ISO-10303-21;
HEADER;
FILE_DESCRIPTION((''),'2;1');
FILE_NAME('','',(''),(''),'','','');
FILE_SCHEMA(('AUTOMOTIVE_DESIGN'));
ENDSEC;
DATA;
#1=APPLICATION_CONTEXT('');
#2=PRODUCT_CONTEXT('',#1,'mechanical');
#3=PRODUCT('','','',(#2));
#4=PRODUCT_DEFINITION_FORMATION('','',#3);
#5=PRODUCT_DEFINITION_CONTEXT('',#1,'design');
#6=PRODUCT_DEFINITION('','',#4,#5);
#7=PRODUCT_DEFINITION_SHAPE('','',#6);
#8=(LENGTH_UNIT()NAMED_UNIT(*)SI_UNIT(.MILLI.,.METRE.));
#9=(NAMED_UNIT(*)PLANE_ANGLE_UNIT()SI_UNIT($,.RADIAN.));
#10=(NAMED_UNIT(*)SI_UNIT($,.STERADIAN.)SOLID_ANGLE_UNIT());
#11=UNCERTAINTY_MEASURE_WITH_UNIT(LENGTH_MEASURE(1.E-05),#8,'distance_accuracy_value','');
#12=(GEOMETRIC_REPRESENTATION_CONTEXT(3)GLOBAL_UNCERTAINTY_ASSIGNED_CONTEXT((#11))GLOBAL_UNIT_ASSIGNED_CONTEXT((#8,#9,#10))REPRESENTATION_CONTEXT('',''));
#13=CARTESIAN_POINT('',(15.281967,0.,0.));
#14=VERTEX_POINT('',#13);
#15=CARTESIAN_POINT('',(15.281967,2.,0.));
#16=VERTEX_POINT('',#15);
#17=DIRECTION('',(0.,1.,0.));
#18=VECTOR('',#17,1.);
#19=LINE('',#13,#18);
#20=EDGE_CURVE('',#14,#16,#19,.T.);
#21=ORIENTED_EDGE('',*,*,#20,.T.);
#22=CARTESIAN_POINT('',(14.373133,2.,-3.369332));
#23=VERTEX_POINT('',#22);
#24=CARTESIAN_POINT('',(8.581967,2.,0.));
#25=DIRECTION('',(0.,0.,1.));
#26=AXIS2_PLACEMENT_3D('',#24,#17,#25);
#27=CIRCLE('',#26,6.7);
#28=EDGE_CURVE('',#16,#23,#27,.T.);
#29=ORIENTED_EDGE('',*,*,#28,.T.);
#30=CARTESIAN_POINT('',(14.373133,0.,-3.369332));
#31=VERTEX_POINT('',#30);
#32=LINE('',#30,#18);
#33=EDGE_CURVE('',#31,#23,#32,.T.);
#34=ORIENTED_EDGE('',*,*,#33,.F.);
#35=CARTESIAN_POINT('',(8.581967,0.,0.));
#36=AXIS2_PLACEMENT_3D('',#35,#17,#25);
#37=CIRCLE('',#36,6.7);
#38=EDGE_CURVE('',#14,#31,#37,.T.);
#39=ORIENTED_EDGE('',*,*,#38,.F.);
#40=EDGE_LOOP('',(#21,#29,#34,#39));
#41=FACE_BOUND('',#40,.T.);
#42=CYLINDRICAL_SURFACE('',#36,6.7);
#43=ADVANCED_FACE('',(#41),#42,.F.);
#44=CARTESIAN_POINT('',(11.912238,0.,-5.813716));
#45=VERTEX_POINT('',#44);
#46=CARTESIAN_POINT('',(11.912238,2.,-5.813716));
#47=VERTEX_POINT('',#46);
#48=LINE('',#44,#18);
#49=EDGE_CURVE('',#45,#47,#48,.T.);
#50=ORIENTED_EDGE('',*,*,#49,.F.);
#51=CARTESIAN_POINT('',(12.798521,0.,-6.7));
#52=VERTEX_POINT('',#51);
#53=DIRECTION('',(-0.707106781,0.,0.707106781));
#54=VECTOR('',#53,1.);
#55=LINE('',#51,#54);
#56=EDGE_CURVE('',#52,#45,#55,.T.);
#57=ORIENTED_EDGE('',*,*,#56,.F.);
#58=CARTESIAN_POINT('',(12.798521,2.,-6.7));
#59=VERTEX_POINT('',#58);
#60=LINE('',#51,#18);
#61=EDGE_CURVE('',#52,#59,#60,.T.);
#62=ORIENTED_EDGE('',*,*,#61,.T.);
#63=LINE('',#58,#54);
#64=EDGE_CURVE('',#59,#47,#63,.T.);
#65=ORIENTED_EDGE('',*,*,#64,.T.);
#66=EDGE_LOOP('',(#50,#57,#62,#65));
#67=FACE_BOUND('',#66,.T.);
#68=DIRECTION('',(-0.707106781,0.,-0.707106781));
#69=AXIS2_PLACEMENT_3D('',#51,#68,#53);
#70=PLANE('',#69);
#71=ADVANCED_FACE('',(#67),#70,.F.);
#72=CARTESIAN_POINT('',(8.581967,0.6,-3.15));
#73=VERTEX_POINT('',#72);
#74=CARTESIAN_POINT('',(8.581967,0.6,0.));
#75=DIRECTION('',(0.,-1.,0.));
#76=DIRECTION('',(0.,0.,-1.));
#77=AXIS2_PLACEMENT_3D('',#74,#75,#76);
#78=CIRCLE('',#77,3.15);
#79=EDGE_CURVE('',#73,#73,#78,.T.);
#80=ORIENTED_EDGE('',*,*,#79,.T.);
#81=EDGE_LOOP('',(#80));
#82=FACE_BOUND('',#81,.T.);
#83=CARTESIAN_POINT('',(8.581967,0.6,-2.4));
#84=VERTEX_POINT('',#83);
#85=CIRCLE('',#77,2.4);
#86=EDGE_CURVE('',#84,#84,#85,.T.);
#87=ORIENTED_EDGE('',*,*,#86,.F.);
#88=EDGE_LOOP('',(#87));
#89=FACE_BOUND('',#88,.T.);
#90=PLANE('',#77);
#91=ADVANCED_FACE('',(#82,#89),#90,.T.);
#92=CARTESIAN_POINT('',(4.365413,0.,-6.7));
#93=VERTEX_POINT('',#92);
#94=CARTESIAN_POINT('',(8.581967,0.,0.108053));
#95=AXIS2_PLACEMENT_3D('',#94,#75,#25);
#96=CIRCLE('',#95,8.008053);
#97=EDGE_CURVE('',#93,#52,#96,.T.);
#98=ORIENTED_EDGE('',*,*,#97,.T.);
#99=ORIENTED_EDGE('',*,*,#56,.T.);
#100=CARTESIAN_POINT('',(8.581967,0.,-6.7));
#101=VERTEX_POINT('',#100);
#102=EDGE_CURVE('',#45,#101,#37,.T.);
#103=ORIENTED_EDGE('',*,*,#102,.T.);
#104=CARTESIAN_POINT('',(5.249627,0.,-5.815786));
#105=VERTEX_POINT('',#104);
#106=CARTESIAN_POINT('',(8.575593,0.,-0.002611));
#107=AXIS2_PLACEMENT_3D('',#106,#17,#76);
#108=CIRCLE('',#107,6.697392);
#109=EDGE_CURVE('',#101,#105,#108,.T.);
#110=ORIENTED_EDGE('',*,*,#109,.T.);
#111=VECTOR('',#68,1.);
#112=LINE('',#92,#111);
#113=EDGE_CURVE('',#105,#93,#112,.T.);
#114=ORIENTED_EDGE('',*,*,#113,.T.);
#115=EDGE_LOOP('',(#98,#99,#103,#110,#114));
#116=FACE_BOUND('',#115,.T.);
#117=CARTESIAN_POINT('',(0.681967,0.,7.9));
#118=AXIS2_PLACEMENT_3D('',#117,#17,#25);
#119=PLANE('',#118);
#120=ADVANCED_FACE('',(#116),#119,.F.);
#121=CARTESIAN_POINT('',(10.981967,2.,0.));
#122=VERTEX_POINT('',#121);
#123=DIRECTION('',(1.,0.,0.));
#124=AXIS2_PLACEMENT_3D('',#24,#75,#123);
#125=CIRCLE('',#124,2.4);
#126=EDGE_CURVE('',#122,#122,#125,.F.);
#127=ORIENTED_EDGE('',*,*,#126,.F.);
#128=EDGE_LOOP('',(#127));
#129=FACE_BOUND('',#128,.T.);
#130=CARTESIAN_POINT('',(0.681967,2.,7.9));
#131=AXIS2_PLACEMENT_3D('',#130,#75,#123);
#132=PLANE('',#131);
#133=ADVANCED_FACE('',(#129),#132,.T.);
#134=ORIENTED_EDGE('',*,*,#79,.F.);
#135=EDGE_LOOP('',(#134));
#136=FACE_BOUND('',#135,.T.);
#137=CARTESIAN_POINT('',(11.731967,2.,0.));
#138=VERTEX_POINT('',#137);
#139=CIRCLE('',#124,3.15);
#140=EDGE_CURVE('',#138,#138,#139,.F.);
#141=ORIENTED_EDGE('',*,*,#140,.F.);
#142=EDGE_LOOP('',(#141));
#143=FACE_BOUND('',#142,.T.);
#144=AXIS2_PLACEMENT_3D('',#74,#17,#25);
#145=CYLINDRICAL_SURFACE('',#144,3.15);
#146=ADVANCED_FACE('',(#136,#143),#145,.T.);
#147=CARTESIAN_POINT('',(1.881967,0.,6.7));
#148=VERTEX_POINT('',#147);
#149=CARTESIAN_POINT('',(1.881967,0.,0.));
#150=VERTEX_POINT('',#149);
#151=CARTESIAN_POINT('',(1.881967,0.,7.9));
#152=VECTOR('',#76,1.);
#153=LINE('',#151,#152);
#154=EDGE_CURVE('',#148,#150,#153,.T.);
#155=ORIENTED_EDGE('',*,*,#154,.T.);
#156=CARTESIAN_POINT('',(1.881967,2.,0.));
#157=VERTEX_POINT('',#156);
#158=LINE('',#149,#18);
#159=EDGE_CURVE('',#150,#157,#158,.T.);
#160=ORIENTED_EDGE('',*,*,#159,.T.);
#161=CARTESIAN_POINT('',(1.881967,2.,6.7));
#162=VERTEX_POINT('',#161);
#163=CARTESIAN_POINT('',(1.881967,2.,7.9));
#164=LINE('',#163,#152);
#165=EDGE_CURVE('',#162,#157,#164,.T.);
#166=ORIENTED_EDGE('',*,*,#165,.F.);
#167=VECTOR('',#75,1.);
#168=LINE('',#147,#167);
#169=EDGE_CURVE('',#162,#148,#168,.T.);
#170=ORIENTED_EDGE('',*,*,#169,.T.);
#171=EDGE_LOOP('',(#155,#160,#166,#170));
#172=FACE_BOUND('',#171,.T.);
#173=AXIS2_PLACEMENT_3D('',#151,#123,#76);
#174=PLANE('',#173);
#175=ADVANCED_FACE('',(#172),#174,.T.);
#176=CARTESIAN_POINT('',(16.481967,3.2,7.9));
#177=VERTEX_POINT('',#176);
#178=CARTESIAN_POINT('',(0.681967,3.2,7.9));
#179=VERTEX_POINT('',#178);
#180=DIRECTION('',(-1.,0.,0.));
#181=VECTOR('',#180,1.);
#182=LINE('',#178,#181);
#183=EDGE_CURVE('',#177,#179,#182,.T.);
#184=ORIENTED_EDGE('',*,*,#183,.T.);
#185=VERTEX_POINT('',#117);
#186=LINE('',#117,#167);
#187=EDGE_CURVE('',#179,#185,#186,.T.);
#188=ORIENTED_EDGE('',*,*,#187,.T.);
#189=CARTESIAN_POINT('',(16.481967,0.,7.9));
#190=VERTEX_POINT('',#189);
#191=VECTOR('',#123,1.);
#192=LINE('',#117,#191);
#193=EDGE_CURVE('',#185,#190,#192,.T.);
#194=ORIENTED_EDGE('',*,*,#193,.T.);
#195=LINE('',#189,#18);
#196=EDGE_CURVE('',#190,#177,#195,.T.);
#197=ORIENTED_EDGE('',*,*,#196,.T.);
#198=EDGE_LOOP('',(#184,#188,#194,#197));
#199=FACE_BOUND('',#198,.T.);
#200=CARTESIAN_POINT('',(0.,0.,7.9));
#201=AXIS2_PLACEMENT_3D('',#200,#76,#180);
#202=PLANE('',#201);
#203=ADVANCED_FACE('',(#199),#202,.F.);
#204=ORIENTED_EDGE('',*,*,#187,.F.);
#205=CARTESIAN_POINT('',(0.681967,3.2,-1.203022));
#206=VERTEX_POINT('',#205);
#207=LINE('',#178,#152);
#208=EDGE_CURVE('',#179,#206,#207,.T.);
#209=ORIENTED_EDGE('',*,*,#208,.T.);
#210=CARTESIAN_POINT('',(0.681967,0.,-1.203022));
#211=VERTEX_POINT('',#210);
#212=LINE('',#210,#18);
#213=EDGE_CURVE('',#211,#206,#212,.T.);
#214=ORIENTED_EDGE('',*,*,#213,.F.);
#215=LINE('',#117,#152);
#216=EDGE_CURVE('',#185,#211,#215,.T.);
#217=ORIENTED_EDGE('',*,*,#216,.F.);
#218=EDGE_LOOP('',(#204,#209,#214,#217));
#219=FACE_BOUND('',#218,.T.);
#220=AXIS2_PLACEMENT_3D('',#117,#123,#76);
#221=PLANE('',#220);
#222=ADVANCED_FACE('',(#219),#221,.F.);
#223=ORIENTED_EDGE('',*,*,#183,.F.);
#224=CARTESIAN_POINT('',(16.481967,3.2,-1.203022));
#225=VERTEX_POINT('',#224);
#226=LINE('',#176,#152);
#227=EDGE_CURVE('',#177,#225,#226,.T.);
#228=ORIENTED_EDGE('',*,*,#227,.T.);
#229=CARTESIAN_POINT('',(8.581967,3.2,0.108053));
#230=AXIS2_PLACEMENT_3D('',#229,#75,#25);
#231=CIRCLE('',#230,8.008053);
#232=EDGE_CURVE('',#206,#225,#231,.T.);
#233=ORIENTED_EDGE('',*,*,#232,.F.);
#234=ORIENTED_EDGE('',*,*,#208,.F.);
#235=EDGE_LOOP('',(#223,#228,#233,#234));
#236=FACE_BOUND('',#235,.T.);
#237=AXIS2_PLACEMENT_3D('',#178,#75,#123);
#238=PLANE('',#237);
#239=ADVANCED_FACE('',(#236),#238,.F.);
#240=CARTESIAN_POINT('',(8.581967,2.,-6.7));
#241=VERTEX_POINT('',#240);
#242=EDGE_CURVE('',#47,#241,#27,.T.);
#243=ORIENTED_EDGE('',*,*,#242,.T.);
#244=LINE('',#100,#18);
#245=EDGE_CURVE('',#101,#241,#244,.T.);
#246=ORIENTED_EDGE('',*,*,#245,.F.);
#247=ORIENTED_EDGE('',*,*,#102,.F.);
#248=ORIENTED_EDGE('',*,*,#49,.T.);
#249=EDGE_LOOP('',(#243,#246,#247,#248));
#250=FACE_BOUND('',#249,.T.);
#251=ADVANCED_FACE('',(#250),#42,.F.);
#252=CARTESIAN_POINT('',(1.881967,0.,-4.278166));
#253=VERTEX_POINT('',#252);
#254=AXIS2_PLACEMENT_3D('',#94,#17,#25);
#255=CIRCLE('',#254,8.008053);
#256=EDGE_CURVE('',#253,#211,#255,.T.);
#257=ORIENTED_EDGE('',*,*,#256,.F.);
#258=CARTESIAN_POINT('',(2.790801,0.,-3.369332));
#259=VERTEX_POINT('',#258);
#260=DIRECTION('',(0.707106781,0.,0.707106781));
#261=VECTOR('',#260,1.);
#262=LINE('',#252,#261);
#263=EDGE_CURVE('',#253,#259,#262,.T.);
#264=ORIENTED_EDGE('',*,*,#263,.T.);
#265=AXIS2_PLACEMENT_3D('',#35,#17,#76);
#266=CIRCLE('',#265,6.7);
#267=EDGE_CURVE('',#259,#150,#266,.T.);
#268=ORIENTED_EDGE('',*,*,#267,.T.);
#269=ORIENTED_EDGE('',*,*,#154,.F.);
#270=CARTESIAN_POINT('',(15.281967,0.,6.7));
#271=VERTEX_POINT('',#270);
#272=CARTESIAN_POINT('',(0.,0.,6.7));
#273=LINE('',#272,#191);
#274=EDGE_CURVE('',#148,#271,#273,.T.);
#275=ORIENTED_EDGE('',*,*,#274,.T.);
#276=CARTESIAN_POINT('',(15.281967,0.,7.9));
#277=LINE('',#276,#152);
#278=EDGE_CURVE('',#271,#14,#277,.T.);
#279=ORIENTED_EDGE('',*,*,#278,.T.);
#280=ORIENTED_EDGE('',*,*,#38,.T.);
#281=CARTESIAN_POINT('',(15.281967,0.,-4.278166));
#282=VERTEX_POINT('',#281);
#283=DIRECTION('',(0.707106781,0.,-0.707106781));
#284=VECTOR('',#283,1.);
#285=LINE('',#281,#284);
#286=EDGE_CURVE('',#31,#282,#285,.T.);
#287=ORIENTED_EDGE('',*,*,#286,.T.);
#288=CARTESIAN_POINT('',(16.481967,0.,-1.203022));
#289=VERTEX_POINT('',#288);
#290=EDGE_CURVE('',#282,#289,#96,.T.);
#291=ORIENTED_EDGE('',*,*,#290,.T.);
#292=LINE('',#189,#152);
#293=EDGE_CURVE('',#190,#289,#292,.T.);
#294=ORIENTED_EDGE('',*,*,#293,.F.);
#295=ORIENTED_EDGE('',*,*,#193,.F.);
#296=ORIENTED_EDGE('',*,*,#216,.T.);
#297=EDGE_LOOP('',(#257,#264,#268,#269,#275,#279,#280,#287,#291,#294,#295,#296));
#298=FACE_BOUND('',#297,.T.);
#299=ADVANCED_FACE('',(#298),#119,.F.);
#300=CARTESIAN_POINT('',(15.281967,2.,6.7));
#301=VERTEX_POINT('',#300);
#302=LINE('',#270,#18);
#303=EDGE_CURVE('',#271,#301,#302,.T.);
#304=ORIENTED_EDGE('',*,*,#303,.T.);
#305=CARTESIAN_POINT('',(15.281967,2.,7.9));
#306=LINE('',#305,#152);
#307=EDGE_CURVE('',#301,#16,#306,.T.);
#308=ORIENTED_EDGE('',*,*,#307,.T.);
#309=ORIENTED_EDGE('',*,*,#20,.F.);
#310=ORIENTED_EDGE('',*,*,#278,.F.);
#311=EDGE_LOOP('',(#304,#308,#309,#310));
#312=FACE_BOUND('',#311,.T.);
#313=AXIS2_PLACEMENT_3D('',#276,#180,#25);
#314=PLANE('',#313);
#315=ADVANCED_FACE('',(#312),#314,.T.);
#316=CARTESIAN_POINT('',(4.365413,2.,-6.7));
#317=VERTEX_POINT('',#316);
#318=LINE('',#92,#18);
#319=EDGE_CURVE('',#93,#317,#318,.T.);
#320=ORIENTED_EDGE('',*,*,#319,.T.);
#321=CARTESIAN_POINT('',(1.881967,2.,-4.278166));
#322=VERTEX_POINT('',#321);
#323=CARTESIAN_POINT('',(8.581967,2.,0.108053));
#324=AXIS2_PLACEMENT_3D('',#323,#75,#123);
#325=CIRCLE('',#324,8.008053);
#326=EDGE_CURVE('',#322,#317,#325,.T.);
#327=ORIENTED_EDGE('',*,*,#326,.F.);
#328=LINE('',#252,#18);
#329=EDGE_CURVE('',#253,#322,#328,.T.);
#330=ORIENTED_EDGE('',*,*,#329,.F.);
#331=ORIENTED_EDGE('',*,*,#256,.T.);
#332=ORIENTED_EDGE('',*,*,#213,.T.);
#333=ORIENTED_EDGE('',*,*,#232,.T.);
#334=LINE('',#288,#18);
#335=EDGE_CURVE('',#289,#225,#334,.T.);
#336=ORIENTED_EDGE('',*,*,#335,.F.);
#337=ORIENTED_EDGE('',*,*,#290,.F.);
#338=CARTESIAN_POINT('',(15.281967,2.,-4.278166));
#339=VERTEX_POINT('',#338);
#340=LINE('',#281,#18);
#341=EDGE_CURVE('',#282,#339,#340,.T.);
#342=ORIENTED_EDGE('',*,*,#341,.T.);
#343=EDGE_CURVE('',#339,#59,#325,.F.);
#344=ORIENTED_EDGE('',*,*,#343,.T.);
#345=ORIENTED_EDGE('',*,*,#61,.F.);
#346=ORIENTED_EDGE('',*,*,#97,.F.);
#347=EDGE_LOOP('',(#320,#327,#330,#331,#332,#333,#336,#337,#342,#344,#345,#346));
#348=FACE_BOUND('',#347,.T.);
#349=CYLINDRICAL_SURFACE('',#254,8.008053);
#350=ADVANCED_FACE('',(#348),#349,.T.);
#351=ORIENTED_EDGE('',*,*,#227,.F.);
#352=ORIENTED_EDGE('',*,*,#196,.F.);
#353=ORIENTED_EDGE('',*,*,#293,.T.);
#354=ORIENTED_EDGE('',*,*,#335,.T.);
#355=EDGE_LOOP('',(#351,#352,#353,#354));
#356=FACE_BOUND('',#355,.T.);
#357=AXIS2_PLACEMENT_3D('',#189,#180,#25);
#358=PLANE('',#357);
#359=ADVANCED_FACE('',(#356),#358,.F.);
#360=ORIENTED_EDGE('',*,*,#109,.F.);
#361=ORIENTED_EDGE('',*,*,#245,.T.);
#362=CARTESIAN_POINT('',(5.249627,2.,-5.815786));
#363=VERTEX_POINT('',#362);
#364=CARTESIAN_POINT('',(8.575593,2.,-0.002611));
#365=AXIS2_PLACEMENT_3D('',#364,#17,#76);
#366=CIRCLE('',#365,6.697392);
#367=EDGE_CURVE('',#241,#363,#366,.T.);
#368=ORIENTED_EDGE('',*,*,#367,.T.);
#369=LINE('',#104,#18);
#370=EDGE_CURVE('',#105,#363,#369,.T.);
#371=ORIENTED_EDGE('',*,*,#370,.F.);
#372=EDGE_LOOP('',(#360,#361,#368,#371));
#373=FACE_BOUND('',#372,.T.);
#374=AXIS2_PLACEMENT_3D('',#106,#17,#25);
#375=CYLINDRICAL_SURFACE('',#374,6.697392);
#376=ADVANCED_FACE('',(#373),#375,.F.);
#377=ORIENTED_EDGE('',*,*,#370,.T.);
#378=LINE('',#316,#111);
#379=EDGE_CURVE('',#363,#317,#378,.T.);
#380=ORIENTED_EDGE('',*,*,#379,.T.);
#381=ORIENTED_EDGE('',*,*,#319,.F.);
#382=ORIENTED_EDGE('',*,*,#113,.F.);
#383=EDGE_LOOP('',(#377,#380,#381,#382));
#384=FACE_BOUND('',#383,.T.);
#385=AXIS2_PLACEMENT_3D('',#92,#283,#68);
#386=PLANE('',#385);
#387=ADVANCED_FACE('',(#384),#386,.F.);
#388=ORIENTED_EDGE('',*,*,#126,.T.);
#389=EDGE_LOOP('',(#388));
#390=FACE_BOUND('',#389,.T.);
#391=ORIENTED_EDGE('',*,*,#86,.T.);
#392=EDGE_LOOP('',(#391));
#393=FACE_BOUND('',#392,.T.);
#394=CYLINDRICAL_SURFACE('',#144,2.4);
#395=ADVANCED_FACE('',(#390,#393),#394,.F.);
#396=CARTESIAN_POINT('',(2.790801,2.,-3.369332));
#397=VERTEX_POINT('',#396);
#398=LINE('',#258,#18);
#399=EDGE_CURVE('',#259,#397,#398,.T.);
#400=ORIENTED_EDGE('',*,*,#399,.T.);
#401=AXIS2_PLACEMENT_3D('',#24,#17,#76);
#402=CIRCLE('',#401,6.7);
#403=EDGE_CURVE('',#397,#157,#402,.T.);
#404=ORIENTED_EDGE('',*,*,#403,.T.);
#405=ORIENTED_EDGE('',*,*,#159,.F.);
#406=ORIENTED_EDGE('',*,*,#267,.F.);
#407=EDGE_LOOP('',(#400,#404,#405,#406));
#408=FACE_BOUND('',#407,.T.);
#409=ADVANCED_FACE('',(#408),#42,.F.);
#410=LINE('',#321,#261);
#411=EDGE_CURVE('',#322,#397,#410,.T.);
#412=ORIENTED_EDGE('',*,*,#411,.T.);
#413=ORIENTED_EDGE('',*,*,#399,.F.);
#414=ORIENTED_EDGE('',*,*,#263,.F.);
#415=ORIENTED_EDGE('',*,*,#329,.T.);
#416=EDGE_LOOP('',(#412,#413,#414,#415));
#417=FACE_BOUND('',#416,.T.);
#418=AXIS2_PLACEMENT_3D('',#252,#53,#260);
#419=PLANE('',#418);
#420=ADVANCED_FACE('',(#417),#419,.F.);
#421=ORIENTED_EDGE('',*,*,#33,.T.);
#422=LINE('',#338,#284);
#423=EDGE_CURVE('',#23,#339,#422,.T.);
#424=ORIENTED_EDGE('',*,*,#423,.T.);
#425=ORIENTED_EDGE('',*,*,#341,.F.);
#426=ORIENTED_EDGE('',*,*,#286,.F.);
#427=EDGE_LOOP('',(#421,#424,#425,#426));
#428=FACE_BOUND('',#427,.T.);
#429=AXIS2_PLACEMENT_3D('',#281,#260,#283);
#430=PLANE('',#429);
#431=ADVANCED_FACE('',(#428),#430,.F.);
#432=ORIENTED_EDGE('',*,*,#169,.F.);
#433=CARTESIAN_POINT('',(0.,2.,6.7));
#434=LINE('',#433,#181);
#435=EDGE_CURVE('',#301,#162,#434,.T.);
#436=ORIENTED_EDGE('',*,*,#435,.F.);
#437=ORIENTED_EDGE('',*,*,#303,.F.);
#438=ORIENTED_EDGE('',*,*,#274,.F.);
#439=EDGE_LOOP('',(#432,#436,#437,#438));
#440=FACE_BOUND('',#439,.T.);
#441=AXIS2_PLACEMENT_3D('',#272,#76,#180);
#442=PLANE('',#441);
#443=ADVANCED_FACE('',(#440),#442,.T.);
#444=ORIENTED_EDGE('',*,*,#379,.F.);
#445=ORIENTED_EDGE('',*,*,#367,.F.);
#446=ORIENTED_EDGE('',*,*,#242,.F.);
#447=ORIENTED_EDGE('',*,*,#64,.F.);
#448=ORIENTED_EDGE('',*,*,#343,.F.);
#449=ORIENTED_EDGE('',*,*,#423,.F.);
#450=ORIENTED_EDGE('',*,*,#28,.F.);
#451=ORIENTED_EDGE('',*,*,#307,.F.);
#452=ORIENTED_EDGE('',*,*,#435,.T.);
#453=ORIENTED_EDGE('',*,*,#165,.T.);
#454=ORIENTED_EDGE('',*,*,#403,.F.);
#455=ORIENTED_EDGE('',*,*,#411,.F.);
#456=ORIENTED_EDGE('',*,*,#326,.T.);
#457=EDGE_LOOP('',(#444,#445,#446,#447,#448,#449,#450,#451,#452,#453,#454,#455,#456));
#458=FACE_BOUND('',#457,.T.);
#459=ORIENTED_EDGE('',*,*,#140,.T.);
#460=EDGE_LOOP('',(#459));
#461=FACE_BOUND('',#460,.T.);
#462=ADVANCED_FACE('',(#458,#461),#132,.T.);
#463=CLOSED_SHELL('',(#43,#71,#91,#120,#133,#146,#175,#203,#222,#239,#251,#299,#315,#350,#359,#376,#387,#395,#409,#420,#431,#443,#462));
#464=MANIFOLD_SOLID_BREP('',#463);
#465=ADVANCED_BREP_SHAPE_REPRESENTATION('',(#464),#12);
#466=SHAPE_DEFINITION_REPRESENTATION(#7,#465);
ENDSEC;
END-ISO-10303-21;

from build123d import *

# Parameters (mm, degrees)
MAINBASESKETCH_W          = 15.8
MAINBASESKETCH_H          = 3.2
MAINBASEEXTRUDE_DEPTH     = 7.9
MAINBASESHELL_T           = -1.2
UNDERSIDECIRCLEEXT_START  = -0.2
UNDERSIDECIRCLESKETCH_R   = 3.15
UNDERSIDECIRCLESKETCH_R_2 = 2.4
UNDERSIDECIRCLEEXT_DEPTH  = 1.6
CUT_EXTRUDE21_DEPTH       = 19.555463972
SWEEP13_DEPTH             = 3


with BuildPart() as part:
    # MainBaseSketch → MainBaseExtrude (new, symmetric)
    with BuildSketch(Plane.XY):
        with Locations((8.581967213, 1.6)):
            Rectangle(MAINBASESKETCH_W, MAINBASESKETCH_H)
    extrude(amount=MAINBASEEXTRUDE_DEPTH, both=True)

    # MainBaseShell
    mainbaseshell_openings = [part.faces().sort_by_distance(p)[0] for p in [
        (8.581967213, 0, 0),
    ]]
    offset(amount=MAINBASESHELL_T, openings=mainbaseshell_openings, kind=Kind.INTERSECTION)

    # UnderSideCircleSketch → UnderSideCircleExt (add)
    with BuildSketch(Plane.XZ.offset(-2).offset(UNDERSIDECIRCLEEXT_START)):
        with Locations((8.581967213, 0)):
            Circle(UNDERSIDECIRCLESKETCH_R)
        with Locations((8.581967213, 0)):
            Circle(UNDERSIDECIRCLESKETCH_R_2, mode=Mode.SUBTRACT)
    extrude(amount=UNDERSIDECIRCLEEXT_DEPTH)

    # Sketch70 → Cut-Extrude21 (cut, through all)
    with BuildSketch(Plane(origin=(0, 3.2, 0), x_dir=(1, 0, 0), z_dir=(0, 1, 0))):
        with BuildLine():
            Line((8.581967213, 7.9), (16.481967213, 7.9))
            Line((16.481967213, 7.9), (16.481967213, 1.203021508))
            ThreePointArc((16.481967213, 1.203021508), (13.76027584, 6.000468394), (8.581967213, 7.9))
        make_face()
    cut_extrude21 = extrude(amount=-CUT_EXTRUDE21_DEPTH, mode=Mode.SUBTRACT)

    # Mirror7: Cut-Extrude21 across plane
    add(cut_extrude21.mirror(Plane.ZY.offset(-8.581967213)), mode=Mode.SUBTRACT)

    # Sweep8: sweep along a curve in space
    with BuildLine() as sweep8_path:
        Line((15.281967213, 0, -4.27816573), (15.281967213, 2, -4.27816573))
    # Sketch75 → Sweep8 (sweep)
    with BuildSketch(Plane(origin=(0, 0, 0), x_dir=(-1, 0, 0), z_dir=(0, -1, 0))):
        with BuildLine():
            Line((-15.281967213, 4.27816573), (-15.281967213, 0))
            ThreePointArc((-15.281967213, 0), (-15.050769738, 1.744876469), (-14.373133216, 3.369331733))
            Line((-14.373133216, 3.369331733), (-15.281967213, 4.27816573))
        make_face()
        with BuildLine():
            Line((-12.798521236, 6.7), (-11.912237665, 5.813716429))
            ThreePointArc((-11.912237665, 5.813716429), (-10.305060351, 6.474638989), (-8.581967213, 6.7))
            Line((-8.581967213, 6.7), (-12.798521236, 6.7))
        make_face()
    sweep(path=sweep8_path.line)

    # Sweep13: read off the stored shape, not the designer's step
    # Sweep13 outline → Sweep13 (add)
    with BuildSketch(Plane(origin=(0, 0, 0), x_dir=(1, 0, 0), z_dir=(0, 1, 0))):
        with BuildLine():
            ThreePointArc((8.581967213, 6.7), (10.305060351, 6.474638989), (11.912237665, 5.813716429))
            Line((11.912237665, 5.813716429), (12.798521236, 6.7))
            ThreePointArc((12.798521236, 6.7), (8.581967213, 7.9), (4.36541319, 6.7))
            Line((4.36541319, 6.7), (5.249626829, 5.815786361))
            ThreePointArc((5.249626829, 5.815786361), (6.857925652, 6.4759933), (8.581967213, 6.7))
        make_face()
        with BuildLine():
            ThreePointArc((1.881967213, 4.27816573), (1.121797778, 2.803095833), (0.681967213, 1.203021508))
            Line((0.681967213, 1.203021508), (0.681967213, -7.9))
            Line((0.681967213, -7.9), (16.481967213, -7.9))
            Line((16.481967213, -7.9), (16.481967213, 1.203021508))
            ThreePointArc((16.481967213, 1.203021508), (16.042136648, 2.803095833), (15.281967213, 4.27816573))
            Line((15.281967213, 4.27816573), (14.373133216, 3.369331733))
            ThreePointArc((14.373133216, 3.369331733), (15.050769738, 1.744876469), (15.281967213, 0))
            Line((15.281967213, 0), (15.281967213, -6.7))
            Line((15.281967213, -6.7), (1.881967213, -6.7))
            Line((1.881967213, -6.7), (1.881967213, 0))
            ThreePointArc((1.881967213, 0), (2.113164688, 1.744876469), (2.79080121, 3.369331733))
            Line((2.79080121, 3.369331733), (1.881967213, 4.27816573))
        make_face()
    extrude(amount=SWEEP13_DEPTH)


solid = part.part
